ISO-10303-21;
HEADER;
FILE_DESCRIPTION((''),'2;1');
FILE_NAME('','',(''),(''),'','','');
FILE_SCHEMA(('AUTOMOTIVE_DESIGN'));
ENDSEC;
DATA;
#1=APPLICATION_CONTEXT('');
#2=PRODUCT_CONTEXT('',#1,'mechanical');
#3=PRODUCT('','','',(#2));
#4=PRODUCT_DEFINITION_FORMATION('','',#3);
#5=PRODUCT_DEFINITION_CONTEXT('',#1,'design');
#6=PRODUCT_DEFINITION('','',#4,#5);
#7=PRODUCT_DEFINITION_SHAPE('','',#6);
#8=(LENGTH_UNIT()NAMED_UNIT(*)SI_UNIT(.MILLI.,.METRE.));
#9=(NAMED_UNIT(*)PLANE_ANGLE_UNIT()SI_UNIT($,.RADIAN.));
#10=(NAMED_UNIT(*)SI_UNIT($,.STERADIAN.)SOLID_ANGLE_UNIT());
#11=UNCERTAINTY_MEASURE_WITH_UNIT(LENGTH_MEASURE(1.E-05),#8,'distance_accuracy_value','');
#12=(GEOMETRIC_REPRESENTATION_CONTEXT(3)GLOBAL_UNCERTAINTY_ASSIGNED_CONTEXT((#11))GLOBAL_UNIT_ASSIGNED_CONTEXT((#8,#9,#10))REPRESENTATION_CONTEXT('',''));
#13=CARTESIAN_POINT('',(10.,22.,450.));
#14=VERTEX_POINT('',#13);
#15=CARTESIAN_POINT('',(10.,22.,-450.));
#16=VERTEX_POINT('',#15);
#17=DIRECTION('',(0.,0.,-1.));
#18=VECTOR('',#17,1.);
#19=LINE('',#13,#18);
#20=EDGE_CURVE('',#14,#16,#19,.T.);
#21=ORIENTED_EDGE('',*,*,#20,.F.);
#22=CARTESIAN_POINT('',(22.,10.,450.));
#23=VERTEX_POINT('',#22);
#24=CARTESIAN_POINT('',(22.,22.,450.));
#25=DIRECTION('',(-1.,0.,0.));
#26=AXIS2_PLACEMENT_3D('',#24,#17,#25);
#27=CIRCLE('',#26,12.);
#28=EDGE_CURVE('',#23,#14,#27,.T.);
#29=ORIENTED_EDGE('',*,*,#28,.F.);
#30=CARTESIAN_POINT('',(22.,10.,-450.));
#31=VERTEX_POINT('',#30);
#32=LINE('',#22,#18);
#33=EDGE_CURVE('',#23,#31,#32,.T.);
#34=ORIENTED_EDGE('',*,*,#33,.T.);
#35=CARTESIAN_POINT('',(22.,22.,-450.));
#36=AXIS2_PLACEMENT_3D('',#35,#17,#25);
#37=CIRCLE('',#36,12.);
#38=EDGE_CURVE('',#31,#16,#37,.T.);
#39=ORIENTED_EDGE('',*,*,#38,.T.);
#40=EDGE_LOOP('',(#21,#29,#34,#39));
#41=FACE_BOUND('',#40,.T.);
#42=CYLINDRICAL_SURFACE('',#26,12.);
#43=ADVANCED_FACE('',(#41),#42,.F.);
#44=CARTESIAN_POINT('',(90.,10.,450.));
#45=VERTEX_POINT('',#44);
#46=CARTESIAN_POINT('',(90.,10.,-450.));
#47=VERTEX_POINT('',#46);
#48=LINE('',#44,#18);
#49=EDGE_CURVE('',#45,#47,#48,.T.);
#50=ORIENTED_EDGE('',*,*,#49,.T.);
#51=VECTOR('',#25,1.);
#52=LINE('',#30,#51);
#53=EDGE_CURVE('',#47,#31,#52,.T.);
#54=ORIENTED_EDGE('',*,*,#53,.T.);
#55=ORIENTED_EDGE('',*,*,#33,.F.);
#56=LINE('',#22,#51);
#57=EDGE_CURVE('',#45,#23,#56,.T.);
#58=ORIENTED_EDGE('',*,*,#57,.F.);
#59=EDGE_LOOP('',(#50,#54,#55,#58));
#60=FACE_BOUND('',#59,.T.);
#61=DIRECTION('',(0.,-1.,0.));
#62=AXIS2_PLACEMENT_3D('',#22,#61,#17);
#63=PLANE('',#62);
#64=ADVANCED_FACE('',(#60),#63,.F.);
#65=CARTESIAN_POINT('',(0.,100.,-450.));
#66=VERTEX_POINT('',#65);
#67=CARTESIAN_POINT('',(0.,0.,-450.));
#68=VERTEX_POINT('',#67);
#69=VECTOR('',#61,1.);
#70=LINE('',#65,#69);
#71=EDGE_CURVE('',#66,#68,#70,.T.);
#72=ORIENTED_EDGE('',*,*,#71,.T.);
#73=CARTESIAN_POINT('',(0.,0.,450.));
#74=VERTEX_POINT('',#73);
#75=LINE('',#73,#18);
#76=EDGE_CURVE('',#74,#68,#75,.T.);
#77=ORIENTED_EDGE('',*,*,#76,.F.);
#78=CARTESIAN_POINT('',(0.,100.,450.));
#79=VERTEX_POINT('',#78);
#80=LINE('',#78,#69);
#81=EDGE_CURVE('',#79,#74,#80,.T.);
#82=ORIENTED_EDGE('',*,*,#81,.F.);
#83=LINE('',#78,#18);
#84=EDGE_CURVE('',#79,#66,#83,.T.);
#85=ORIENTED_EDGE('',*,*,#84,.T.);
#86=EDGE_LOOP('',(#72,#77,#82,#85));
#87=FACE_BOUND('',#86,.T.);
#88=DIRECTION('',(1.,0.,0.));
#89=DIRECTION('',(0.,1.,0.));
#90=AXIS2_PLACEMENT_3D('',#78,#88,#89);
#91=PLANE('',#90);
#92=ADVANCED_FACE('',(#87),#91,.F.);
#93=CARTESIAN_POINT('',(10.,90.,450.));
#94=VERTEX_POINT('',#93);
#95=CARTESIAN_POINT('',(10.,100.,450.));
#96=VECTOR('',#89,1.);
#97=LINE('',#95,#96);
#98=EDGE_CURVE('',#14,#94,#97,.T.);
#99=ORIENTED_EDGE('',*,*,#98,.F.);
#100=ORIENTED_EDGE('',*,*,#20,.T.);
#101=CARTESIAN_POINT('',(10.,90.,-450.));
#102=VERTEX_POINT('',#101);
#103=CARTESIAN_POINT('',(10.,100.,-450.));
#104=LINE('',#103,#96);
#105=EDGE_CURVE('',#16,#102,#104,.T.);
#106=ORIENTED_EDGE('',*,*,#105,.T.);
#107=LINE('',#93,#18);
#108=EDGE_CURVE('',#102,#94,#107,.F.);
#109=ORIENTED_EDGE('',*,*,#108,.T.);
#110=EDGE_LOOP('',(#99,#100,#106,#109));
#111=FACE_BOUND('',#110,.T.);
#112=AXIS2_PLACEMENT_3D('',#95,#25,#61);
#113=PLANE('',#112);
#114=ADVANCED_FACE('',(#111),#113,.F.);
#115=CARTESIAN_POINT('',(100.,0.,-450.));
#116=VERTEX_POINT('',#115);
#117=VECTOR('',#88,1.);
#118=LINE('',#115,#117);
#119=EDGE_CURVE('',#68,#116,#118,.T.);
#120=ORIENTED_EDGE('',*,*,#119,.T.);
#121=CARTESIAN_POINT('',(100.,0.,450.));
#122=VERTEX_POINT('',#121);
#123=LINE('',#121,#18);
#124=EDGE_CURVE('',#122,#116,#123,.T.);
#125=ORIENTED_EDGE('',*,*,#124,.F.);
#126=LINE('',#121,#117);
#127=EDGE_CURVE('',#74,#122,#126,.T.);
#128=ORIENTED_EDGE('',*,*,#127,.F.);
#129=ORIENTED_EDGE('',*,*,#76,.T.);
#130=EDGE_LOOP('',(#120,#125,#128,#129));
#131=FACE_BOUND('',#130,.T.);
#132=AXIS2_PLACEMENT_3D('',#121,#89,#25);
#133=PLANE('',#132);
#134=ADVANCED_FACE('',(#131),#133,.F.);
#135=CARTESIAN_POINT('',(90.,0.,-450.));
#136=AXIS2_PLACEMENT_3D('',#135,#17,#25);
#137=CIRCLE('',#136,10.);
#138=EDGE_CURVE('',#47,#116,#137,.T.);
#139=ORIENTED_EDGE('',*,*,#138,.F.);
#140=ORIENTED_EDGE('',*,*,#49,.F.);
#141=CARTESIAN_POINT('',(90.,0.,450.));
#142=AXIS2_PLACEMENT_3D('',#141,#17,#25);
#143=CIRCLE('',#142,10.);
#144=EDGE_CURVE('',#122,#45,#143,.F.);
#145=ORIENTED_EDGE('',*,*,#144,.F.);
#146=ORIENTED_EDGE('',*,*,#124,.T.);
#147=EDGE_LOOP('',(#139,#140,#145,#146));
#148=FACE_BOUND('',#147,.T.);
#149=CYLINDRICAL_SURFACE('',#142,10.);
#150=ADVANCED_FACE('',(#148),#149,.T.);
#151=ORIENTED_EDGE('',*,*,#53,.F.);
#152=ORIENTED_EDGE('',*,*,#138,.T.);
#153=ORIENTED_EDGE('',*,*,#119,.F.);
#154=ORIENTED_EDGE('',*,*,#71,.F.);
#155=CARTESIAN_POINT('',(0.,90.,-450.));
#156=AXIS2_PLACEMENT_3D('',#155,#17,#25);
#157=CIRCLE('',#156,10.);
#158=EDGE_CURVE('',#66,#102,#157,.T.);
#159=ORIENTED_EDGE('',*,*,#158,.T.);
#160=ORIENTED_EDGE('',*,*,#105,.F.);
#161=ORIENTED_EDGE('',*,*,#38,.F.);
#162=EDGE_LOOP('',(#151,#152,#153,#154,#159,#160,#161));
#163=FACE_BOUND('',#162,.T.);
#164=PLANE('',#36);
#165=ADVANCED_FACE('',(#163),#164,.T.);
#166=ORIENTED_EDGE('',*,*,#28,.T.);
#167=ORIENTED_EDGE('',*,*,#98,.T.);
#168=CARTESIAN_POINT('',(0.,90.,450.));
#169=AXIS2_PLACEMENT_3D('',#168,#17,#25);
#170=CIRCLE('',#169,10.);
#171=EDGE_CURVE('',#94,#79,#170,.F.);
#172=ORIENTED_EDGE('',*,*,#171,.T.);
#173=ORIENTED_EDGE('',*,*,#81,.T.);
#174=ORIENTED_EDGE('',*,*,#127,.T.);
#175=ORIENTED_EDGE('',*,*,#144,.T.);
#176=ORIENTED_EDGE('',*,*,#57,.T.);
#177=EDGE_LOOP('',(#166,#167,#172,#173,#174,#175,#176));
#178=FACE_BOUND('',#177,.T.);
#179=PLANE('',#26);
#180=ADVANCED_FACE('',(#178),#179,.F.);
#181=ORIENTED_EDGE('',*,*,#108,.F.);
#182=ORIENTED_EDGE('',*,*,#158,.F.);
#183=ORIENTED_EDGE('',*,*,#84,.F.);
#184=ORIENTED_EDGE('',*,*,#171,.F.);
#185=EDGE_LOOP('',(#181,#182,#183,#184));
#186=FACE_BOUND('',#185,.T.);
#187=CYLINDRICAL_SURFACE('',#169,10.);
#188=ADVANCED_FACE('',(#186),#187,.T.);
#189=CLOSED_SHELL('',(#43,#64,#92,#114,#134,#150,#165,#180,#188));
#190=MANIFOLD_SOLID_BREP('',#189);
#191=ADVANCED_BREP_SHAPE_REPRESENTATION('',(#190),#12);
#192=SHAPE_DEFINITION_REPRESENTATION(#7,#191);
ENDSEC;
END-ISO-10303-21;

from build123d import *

# Parameters (mm, degrees)
BASESTEELANGLE_DEPTH = 450
TOEFILLET_R          = 10


with BuildPart() as part:
    # Sketch1 → BaseSteelAngle (new, symmetric)
    with BuildSketch(Plane.XY):
        with BuildLine():
            Line((0, 100), (0, 0))
            Line((0, 0), (100, 0))
            Line((100, 0), (100, 10))
            Line((100, 10), (22, 10))
            ThreePointArc((22, 10), (13.514718626, 13.514718626), (10, 22))
            Line((10, 22), (10, 100))
            Line((10, 100), (0, 100))
        make_face()
    extrude(amount=BASESTEELANGLE_DEPTH, both=True)

    # ToeFillet
    toefillet_edges = [part.edges().sort_by_distance(p)[0] for p in [
        (10, 100, 0),
        (100, 10, 0),
    ]]
    fillet(toefillet_edges, radius=TOEFILLET_R - 0.0001)  # a hair under: the kernel refuses the full size


solid = part.part
